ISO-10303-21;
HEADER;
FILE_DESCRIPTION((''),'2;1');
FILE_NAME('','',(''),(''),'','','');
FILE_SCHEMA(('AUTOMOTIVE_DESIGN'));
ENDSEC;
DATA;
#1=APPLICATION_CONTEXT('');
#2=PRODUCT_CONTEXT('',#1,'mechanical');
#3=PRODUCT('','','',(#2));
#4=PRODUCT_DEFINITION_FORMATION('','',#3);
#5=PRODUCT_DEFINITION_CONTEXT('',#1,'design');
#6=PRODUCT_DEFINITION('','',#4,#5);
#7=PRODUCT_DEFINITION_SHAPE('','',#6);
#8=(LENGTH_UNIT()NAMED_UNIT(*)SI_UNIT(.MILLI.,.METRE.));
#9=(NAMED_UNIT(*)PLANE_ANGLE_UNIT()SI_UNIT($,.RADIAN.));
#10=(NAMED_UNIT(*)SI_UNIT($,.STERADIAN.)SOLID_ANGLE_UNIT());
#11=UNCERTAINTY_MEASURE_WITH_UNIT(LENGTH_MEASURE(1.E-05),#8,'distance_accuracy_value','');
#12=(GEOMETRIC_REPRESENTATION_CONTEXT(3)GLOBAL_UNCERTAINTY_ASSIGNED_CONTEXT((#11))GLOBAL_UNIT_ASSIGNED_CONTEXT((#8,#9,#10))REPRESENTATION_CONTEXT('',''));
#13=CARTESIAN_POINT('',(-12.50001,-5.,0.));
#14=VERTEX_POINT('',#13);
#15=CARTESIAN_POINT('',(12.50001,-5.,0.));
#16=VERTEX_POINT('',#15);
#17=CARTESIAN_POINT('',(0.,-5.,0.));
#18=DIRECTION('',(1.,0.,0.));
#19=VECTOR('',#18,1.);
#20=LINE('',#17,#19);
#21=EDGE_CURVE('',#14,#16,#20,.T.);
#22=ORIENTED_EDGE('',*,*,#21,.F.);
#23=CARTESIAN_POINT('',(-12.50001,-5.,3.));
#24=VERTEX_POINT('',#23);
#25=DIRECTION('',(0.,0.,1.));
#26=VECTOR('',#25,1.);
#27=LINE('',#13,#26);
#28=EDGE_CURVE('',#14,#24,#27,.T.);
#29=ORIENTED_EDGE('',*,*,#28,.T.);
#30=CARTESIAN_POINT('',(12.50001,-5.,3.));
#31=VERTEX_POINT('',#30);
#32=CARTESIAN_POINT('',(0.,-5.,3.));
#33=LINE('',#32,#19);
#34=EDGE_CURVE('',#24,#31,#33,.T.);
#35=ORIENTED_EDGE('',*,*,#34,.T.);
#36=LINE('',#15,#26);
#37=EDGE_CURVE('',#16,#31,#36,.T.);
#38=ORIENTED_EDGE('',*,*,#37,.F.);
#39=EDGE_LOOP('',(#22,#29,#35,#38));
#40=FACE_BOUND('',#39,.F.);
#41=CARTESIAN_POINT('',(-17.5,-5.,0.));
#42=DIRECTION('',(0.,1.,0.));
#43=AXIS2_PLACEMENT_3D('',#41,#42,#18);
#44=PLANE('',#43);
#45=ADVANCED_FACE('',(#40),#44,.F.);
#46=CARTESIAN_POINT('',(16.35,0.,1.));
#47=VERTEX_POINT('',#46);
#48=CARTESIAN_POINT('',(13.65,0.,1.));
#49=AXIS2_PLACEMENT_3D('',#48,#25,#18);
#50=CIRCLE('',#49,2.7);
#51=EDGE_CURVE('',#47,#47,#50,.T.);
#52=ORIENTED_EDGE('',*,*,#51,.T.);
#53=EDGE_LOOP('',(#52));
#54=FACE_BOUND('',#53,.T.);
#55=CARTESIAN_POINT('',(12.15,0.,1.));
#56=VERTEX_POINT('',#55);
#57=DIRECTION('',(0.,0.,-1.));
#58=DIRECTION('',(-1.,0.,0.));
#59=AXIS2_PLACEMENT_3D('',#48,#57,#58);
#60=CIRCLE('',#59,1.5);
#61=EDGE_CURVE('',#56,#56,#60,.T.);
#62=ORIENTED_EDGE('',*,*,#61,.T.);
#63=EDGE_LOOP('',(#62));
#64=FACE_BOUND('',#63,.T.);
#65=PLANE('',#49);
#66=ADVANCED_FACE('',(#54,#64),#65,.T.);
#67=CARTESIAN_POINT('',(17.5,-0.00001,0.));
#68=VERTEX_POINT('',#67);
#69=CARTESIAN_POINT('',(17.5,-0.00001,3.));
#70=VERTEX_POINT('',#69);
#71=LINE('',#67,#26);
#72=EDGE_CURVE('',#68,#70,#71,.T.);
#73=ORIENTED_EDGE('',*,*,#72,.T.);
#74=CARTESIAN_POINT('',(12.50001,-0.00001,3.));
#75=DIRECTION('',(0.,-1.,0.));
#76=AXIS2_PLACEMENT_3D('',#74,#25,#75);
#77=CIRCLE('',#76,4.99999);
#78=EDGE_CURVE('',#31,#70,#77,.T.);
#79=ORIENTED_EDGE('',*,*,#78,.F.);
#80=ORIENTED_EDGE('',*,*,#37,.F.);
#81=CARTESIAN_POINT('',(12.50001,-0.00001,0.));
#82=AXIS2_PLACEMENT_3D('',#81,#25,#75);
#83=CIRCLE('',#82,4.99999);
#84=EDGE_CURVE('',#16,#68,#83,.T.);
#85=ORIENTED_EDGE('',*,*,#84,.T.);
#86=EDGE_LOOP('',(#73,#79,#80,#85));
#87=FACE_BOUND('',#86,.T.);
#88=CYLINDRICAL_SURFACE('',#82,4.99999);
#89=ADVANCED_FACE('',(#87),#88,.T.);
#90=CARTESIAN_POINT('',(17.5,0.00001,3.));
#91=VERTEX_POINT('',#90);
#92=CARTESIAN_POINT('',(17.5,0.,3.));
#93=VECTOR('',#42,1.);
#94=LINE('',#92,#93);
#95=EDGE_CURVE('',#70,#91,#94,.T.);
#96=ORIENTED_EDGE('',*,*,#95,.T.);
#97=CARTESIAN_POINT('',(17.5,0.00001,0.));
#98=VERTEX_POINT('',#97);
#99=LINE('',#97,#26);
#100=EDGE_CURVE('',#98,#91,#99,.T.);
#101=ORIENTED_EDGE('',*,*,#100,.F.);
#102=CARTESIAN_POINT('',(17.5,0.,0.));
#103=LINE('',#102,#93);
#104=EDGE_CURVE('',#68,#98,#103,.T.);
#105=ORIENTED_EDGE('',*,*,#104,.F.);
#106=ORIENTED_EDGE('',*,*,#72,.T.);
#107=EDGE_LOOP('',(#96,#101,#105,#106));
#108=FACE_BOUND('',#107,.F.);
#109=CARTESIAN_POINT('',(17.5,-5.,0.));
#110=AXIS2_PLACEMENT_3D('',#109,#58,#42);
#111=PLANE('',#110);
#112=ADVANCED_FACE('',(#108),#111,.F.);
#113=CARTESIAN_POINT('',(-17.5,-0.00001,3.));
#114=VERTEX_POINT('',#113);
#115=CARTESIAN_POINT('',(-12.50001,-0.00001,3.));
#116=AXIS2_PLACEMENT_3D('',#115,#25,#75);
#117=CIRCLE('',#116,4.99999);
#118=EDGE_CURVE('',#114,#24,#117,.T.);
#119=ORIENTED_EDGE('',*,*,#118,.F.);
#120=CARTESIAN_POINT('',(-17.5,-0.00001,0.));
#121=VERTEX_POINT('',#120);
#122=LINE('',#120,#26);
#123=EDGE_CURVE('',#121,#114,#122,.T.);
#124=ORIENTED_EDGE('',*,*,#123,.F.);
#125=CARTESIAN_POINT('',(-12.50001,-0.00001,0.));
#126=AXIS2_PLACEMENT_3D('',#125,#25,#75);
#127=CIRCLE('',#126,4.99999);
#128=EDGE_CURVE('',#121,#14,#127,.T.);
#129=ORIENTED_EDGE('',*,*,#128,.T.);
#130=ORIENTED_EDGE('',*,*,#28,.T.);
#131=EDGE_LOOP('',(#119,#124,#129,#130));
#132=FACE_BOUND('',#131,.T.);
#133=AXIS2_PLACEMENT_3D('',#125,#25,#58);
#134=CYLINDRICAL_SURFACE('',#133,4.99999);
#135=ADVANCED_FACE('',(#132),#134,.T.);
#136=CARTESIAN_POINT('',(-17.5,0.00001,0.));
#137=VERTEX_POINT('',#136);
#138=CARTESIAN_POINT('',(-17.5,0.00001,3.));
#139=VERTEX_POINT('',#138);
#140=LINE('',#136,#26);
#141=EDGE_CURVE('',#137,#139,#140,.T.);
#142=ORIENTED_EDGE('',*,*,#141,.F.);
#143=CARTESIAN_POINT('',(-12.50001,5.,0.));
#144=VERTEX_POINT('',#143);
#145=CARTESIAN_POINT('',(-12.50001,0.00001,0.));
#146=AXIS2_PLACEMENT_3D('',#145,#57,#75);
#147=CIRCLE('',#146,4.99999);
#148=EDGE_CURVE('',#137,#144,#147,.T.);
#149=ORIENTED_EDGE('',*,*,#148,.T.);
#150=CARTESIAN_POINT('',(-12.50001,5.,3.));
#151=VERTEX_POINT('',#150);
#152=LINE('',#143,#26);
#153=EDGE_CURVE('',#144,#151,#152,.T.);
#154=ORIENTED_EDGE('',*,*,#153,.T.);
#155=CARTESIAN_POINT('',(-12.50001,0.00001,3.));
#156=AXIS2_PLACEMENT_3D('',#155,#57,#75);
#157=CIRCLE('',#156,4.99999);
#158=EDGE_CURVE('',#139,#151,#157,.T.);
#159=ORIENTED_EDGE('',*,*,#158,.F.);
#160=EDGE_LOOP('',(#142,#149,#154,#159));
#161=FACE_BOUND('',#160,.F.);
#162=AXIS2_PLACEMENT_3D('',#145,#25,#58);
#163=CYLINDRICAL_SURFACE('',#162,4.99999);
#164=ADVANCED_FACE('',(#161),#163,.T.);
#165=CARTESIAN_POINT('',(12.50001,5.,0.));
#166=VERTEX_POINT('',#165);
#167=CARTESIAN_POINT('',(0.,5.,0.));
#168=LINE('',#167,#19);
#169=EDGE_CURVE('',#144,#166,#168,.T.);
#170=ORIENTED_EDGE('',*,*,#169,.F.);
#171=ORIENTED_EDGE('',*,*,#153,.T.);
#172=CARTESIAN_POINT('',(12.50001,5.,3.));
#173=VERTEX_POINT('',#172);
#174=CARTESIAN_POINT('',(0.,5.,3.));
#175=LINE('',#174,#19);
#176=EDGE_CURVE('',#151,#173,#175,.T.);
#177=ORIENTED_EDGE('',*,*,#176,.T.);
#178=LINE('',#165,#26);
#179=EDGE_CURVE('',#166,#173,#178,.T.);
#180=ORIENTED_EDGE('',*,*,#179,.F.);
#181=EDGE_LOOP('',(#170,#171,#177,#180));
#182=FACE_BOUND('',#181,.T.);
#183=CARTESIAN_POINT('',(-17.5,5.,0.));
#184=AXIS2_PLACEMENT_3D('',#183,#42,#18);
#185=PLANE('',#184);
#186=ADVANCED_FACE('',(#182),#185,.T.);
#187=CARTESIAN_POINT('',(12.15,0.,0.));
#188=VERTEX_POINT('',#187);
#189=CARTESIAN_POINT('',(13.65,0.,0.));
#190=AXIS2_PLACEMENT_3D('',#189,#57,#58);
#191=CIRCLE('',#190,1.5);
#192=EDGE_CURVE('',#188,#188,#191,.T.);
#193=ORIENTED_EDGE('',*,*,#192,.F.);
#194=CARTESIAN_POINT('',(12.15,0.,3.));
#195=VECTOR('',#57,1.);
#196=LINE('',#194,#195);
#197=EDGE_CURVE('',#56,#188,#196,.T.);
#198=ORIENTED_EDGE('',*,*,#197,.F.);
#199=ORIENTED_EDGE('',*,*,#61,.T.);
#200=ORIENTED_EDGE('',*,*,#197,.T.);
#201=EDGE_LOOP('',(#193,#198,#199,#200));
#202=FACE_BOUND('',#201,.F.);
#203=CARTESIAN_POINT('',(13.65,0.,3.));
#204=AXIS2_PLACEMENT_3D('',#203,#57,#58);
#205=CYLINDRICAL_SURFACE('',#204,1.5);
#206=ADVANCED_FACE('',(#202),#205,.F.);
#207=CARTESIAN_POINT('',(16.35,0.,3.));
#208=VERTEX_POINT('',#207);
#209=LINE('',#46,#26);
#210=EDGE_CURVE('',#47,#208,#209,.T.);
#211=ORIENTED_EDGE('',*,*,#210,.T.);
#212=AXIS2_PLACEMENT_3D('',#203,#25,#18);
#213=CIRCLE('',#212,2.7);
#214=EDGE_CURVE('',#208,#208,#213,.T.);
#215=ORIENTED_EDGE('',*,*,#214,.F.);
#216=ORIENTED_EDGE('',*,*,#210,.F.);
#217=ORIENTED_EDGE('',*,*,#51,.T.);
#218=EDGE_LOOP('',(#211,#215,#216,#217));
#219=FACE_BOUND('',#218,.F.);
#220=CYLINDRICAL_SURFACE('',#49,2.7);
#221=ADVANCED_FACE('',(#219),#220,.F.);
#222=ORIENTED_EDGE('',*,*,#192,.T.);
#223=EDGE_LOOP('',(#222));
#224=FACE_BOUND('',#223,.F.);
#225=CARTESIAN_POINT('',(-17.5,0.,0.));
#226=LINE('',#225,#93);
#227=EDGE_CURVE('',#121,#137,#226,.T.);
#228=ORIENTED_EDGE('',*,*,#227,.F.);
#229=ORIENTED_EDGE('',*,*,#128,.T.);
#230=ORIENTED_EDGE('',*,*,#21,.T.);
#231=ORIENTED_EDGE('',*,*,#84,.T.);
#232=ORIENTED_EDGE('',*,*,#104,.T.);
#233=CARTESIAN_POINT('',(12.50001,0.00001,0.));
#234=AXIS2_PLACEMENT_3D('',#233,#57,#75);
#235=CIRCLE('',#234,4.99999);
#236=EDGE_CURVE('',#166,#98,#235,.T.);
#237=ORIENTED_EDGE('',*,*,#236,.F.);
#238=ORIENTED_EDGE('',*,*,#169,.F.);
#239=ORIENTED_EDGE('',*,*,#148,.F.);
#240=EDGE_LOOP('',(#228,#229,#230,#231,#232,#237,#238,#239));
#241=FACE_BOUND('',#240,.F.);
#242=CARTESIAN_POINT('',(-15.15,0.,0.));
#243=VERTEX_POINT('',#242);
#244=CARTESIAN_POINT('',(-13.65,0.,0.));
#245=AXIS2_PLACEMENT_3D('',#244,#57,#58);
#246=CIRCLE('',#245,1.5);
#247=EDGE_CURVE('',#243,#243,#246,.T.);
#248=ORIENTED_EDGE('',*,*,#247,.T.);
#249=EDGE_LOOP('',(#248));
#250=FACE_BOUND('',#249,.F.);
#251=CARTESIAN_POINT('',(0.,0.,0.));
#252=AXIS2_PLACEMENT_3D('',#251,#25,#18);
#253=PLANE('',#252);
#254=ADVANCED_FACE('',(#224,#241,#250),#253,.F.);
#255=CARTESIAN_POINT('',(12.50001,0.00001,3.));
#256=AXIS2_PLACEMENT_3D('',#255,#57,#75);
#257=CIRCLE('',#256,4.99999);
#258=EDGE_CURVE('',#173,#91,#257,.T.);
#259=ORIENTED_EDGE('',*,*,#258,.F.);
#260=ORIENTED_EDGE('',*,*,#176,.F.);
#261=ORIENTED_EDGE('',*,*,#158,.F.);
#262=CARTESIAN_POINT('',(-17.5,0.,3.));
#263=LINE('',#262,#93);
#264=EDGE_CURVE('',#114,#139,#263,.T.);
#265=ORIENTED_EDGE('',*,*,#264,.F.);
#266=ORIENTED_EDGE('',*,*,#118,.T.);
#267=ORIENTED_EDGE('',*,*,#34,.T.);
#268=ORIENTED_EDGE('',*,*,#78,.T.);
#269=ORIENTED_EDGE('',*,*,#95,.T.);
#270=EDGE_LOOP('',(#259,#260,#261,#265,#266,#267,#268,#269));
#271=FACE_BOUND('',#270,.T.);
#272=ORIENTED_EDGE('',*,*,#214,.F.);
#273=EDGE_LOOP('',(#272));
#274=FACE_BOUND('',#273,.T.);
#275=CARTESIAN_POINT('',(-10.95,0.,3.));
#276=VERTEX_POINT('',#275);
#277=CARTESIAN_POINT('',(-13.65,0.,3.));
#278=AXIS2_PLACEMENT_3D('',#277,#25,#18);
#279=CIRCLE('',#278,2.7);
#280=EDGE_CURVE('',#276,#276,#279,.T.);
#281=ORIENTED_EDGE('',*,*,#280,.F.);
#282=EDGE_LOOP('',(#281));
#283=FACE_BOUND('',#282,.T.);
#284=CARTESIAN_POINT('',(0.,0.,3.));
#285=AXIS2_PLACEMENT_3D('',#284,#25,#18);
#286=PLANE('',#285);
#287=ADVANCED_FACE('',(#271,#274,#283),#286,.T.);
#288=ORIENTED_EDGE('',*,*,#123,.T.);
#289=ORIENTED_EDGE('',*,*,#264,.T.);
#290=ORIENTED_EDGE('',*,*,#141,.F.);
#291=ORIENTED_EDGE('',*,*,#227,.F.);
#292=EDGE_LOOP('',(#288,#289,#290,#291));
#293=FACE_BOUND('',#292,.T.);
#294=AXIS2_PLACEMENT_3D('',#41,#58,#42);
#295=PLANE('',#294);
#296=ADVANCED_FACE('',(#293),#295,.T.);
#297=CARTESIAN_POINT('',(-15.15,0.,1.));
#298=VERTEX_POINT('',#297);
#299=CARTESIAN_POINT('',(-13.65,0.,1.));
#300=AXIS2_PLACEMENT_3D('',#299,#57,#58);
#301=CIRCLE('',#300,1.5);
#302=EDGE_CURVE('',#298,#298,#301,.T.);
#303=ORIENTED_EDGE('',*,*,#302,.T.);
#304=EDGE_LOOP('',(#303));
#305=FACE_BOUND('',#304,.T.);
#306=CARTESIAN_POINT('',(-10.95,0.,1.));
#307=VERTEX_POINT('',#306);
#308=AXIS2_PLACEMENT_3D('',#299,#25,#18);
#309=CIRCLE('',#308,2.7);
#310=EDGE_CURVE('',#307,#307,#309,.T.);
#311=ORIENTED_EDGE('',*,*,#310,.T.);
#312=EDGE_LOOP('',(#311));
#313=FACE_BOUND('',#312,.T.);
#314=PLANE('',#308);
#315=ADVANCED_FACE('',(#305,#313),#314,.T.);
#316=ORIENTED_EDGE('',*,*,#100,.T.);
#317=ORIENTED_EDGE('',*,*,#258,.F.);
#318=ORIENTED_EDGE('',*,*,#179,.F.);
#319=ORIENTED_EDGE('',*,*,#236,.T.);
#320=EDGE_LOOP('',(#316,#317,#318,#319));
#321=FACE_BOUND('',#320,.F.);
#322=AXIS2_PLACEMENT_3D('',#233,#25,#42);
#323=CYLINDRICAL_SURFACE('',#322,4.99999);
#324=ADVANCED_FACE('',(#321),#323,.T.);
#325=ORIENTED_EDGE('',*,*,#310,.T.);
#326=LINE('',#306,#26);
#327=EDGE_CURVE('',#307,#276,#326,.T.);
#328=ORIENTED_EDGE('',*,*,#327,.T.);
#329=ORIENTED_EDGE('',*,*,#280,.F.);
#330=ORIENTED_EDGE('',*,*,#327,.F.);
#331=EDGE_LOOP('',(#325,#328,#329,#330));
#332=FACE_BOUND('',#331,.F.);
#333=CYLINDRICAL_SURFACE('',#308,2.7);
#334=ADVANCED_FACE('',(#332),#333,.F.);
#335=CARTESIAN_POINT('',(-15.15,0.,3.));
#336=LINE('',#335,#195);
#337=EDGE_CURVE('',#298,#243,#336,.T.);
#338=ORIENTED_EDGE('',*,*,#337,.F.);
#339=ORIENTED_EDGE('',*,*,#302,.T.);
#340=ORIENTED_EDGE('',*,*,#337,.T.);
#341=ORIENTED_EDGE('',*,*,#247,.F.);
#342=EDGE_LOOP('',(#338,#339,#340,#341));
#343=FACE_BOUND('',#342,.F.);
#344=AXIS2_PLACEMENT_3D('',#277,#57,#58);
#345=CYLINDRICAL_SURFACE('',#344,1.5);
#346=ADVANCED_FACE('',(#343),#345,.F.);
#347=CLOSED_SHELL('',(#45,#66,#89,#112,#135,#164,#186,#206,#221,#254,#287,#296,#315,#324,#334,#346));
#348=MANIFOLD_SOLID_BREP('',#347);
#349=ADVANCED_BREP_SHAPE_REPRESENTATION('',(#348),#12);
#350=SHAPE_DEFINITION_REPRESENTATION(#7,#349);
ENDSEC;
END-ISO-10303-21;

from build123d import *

# Parameters (mm, degrees)
F0_W           = 35
F0_H           = 10
F0_W_2         = 20
F0_H_2         = 5
F1_DEPTH       = 3
F4_D           = 3
F4_CBORE_D     = 5.4
F4_CBORE_DEPTH = 2
F5_R           = 4.99999


# Not quite as in the source:
# - a fillet or chamfer is up to 0.001 mm smaller than in the source, because OpenCascade refuses the exact size


with BuildPart() as f1:
    # F0 (on Top) → F1 (new body)
    with BuildSketch(Plane.XY):
        Rectangle(F0_W, F0_H)
        Rectangle(F0_W_2, F0_H_2, mode=Mode.SUBTRACT)
        Rectangle(F0_W_2, F0_H_2)
    extrude(amount=F1_DEPTH)

    # F4 (through all)
    with Locations(Plane.XY.offset(3)):
        with Locations((-13.65, 0), (13.65, 0)):
            CounterBoreHole(F4_D / 2, F4_CBORE_D / 2, F4_CBORE_DEPTH)

    # F5 (radius 5 in the source; OpenCascade refuses exactly that, so slightly less here)
    f5_edges = [f1.edges().sort_by_distance(p)[0] for p in [
        (-17.5, -5, 1.5),
        (-17.5, 5, 1.5),
        (17.5, 5, 1.5),
        (17.5, -5, 1.5),
    ]]
    fillet(f5_edges, radius=F5_R)


solid = f1.part
